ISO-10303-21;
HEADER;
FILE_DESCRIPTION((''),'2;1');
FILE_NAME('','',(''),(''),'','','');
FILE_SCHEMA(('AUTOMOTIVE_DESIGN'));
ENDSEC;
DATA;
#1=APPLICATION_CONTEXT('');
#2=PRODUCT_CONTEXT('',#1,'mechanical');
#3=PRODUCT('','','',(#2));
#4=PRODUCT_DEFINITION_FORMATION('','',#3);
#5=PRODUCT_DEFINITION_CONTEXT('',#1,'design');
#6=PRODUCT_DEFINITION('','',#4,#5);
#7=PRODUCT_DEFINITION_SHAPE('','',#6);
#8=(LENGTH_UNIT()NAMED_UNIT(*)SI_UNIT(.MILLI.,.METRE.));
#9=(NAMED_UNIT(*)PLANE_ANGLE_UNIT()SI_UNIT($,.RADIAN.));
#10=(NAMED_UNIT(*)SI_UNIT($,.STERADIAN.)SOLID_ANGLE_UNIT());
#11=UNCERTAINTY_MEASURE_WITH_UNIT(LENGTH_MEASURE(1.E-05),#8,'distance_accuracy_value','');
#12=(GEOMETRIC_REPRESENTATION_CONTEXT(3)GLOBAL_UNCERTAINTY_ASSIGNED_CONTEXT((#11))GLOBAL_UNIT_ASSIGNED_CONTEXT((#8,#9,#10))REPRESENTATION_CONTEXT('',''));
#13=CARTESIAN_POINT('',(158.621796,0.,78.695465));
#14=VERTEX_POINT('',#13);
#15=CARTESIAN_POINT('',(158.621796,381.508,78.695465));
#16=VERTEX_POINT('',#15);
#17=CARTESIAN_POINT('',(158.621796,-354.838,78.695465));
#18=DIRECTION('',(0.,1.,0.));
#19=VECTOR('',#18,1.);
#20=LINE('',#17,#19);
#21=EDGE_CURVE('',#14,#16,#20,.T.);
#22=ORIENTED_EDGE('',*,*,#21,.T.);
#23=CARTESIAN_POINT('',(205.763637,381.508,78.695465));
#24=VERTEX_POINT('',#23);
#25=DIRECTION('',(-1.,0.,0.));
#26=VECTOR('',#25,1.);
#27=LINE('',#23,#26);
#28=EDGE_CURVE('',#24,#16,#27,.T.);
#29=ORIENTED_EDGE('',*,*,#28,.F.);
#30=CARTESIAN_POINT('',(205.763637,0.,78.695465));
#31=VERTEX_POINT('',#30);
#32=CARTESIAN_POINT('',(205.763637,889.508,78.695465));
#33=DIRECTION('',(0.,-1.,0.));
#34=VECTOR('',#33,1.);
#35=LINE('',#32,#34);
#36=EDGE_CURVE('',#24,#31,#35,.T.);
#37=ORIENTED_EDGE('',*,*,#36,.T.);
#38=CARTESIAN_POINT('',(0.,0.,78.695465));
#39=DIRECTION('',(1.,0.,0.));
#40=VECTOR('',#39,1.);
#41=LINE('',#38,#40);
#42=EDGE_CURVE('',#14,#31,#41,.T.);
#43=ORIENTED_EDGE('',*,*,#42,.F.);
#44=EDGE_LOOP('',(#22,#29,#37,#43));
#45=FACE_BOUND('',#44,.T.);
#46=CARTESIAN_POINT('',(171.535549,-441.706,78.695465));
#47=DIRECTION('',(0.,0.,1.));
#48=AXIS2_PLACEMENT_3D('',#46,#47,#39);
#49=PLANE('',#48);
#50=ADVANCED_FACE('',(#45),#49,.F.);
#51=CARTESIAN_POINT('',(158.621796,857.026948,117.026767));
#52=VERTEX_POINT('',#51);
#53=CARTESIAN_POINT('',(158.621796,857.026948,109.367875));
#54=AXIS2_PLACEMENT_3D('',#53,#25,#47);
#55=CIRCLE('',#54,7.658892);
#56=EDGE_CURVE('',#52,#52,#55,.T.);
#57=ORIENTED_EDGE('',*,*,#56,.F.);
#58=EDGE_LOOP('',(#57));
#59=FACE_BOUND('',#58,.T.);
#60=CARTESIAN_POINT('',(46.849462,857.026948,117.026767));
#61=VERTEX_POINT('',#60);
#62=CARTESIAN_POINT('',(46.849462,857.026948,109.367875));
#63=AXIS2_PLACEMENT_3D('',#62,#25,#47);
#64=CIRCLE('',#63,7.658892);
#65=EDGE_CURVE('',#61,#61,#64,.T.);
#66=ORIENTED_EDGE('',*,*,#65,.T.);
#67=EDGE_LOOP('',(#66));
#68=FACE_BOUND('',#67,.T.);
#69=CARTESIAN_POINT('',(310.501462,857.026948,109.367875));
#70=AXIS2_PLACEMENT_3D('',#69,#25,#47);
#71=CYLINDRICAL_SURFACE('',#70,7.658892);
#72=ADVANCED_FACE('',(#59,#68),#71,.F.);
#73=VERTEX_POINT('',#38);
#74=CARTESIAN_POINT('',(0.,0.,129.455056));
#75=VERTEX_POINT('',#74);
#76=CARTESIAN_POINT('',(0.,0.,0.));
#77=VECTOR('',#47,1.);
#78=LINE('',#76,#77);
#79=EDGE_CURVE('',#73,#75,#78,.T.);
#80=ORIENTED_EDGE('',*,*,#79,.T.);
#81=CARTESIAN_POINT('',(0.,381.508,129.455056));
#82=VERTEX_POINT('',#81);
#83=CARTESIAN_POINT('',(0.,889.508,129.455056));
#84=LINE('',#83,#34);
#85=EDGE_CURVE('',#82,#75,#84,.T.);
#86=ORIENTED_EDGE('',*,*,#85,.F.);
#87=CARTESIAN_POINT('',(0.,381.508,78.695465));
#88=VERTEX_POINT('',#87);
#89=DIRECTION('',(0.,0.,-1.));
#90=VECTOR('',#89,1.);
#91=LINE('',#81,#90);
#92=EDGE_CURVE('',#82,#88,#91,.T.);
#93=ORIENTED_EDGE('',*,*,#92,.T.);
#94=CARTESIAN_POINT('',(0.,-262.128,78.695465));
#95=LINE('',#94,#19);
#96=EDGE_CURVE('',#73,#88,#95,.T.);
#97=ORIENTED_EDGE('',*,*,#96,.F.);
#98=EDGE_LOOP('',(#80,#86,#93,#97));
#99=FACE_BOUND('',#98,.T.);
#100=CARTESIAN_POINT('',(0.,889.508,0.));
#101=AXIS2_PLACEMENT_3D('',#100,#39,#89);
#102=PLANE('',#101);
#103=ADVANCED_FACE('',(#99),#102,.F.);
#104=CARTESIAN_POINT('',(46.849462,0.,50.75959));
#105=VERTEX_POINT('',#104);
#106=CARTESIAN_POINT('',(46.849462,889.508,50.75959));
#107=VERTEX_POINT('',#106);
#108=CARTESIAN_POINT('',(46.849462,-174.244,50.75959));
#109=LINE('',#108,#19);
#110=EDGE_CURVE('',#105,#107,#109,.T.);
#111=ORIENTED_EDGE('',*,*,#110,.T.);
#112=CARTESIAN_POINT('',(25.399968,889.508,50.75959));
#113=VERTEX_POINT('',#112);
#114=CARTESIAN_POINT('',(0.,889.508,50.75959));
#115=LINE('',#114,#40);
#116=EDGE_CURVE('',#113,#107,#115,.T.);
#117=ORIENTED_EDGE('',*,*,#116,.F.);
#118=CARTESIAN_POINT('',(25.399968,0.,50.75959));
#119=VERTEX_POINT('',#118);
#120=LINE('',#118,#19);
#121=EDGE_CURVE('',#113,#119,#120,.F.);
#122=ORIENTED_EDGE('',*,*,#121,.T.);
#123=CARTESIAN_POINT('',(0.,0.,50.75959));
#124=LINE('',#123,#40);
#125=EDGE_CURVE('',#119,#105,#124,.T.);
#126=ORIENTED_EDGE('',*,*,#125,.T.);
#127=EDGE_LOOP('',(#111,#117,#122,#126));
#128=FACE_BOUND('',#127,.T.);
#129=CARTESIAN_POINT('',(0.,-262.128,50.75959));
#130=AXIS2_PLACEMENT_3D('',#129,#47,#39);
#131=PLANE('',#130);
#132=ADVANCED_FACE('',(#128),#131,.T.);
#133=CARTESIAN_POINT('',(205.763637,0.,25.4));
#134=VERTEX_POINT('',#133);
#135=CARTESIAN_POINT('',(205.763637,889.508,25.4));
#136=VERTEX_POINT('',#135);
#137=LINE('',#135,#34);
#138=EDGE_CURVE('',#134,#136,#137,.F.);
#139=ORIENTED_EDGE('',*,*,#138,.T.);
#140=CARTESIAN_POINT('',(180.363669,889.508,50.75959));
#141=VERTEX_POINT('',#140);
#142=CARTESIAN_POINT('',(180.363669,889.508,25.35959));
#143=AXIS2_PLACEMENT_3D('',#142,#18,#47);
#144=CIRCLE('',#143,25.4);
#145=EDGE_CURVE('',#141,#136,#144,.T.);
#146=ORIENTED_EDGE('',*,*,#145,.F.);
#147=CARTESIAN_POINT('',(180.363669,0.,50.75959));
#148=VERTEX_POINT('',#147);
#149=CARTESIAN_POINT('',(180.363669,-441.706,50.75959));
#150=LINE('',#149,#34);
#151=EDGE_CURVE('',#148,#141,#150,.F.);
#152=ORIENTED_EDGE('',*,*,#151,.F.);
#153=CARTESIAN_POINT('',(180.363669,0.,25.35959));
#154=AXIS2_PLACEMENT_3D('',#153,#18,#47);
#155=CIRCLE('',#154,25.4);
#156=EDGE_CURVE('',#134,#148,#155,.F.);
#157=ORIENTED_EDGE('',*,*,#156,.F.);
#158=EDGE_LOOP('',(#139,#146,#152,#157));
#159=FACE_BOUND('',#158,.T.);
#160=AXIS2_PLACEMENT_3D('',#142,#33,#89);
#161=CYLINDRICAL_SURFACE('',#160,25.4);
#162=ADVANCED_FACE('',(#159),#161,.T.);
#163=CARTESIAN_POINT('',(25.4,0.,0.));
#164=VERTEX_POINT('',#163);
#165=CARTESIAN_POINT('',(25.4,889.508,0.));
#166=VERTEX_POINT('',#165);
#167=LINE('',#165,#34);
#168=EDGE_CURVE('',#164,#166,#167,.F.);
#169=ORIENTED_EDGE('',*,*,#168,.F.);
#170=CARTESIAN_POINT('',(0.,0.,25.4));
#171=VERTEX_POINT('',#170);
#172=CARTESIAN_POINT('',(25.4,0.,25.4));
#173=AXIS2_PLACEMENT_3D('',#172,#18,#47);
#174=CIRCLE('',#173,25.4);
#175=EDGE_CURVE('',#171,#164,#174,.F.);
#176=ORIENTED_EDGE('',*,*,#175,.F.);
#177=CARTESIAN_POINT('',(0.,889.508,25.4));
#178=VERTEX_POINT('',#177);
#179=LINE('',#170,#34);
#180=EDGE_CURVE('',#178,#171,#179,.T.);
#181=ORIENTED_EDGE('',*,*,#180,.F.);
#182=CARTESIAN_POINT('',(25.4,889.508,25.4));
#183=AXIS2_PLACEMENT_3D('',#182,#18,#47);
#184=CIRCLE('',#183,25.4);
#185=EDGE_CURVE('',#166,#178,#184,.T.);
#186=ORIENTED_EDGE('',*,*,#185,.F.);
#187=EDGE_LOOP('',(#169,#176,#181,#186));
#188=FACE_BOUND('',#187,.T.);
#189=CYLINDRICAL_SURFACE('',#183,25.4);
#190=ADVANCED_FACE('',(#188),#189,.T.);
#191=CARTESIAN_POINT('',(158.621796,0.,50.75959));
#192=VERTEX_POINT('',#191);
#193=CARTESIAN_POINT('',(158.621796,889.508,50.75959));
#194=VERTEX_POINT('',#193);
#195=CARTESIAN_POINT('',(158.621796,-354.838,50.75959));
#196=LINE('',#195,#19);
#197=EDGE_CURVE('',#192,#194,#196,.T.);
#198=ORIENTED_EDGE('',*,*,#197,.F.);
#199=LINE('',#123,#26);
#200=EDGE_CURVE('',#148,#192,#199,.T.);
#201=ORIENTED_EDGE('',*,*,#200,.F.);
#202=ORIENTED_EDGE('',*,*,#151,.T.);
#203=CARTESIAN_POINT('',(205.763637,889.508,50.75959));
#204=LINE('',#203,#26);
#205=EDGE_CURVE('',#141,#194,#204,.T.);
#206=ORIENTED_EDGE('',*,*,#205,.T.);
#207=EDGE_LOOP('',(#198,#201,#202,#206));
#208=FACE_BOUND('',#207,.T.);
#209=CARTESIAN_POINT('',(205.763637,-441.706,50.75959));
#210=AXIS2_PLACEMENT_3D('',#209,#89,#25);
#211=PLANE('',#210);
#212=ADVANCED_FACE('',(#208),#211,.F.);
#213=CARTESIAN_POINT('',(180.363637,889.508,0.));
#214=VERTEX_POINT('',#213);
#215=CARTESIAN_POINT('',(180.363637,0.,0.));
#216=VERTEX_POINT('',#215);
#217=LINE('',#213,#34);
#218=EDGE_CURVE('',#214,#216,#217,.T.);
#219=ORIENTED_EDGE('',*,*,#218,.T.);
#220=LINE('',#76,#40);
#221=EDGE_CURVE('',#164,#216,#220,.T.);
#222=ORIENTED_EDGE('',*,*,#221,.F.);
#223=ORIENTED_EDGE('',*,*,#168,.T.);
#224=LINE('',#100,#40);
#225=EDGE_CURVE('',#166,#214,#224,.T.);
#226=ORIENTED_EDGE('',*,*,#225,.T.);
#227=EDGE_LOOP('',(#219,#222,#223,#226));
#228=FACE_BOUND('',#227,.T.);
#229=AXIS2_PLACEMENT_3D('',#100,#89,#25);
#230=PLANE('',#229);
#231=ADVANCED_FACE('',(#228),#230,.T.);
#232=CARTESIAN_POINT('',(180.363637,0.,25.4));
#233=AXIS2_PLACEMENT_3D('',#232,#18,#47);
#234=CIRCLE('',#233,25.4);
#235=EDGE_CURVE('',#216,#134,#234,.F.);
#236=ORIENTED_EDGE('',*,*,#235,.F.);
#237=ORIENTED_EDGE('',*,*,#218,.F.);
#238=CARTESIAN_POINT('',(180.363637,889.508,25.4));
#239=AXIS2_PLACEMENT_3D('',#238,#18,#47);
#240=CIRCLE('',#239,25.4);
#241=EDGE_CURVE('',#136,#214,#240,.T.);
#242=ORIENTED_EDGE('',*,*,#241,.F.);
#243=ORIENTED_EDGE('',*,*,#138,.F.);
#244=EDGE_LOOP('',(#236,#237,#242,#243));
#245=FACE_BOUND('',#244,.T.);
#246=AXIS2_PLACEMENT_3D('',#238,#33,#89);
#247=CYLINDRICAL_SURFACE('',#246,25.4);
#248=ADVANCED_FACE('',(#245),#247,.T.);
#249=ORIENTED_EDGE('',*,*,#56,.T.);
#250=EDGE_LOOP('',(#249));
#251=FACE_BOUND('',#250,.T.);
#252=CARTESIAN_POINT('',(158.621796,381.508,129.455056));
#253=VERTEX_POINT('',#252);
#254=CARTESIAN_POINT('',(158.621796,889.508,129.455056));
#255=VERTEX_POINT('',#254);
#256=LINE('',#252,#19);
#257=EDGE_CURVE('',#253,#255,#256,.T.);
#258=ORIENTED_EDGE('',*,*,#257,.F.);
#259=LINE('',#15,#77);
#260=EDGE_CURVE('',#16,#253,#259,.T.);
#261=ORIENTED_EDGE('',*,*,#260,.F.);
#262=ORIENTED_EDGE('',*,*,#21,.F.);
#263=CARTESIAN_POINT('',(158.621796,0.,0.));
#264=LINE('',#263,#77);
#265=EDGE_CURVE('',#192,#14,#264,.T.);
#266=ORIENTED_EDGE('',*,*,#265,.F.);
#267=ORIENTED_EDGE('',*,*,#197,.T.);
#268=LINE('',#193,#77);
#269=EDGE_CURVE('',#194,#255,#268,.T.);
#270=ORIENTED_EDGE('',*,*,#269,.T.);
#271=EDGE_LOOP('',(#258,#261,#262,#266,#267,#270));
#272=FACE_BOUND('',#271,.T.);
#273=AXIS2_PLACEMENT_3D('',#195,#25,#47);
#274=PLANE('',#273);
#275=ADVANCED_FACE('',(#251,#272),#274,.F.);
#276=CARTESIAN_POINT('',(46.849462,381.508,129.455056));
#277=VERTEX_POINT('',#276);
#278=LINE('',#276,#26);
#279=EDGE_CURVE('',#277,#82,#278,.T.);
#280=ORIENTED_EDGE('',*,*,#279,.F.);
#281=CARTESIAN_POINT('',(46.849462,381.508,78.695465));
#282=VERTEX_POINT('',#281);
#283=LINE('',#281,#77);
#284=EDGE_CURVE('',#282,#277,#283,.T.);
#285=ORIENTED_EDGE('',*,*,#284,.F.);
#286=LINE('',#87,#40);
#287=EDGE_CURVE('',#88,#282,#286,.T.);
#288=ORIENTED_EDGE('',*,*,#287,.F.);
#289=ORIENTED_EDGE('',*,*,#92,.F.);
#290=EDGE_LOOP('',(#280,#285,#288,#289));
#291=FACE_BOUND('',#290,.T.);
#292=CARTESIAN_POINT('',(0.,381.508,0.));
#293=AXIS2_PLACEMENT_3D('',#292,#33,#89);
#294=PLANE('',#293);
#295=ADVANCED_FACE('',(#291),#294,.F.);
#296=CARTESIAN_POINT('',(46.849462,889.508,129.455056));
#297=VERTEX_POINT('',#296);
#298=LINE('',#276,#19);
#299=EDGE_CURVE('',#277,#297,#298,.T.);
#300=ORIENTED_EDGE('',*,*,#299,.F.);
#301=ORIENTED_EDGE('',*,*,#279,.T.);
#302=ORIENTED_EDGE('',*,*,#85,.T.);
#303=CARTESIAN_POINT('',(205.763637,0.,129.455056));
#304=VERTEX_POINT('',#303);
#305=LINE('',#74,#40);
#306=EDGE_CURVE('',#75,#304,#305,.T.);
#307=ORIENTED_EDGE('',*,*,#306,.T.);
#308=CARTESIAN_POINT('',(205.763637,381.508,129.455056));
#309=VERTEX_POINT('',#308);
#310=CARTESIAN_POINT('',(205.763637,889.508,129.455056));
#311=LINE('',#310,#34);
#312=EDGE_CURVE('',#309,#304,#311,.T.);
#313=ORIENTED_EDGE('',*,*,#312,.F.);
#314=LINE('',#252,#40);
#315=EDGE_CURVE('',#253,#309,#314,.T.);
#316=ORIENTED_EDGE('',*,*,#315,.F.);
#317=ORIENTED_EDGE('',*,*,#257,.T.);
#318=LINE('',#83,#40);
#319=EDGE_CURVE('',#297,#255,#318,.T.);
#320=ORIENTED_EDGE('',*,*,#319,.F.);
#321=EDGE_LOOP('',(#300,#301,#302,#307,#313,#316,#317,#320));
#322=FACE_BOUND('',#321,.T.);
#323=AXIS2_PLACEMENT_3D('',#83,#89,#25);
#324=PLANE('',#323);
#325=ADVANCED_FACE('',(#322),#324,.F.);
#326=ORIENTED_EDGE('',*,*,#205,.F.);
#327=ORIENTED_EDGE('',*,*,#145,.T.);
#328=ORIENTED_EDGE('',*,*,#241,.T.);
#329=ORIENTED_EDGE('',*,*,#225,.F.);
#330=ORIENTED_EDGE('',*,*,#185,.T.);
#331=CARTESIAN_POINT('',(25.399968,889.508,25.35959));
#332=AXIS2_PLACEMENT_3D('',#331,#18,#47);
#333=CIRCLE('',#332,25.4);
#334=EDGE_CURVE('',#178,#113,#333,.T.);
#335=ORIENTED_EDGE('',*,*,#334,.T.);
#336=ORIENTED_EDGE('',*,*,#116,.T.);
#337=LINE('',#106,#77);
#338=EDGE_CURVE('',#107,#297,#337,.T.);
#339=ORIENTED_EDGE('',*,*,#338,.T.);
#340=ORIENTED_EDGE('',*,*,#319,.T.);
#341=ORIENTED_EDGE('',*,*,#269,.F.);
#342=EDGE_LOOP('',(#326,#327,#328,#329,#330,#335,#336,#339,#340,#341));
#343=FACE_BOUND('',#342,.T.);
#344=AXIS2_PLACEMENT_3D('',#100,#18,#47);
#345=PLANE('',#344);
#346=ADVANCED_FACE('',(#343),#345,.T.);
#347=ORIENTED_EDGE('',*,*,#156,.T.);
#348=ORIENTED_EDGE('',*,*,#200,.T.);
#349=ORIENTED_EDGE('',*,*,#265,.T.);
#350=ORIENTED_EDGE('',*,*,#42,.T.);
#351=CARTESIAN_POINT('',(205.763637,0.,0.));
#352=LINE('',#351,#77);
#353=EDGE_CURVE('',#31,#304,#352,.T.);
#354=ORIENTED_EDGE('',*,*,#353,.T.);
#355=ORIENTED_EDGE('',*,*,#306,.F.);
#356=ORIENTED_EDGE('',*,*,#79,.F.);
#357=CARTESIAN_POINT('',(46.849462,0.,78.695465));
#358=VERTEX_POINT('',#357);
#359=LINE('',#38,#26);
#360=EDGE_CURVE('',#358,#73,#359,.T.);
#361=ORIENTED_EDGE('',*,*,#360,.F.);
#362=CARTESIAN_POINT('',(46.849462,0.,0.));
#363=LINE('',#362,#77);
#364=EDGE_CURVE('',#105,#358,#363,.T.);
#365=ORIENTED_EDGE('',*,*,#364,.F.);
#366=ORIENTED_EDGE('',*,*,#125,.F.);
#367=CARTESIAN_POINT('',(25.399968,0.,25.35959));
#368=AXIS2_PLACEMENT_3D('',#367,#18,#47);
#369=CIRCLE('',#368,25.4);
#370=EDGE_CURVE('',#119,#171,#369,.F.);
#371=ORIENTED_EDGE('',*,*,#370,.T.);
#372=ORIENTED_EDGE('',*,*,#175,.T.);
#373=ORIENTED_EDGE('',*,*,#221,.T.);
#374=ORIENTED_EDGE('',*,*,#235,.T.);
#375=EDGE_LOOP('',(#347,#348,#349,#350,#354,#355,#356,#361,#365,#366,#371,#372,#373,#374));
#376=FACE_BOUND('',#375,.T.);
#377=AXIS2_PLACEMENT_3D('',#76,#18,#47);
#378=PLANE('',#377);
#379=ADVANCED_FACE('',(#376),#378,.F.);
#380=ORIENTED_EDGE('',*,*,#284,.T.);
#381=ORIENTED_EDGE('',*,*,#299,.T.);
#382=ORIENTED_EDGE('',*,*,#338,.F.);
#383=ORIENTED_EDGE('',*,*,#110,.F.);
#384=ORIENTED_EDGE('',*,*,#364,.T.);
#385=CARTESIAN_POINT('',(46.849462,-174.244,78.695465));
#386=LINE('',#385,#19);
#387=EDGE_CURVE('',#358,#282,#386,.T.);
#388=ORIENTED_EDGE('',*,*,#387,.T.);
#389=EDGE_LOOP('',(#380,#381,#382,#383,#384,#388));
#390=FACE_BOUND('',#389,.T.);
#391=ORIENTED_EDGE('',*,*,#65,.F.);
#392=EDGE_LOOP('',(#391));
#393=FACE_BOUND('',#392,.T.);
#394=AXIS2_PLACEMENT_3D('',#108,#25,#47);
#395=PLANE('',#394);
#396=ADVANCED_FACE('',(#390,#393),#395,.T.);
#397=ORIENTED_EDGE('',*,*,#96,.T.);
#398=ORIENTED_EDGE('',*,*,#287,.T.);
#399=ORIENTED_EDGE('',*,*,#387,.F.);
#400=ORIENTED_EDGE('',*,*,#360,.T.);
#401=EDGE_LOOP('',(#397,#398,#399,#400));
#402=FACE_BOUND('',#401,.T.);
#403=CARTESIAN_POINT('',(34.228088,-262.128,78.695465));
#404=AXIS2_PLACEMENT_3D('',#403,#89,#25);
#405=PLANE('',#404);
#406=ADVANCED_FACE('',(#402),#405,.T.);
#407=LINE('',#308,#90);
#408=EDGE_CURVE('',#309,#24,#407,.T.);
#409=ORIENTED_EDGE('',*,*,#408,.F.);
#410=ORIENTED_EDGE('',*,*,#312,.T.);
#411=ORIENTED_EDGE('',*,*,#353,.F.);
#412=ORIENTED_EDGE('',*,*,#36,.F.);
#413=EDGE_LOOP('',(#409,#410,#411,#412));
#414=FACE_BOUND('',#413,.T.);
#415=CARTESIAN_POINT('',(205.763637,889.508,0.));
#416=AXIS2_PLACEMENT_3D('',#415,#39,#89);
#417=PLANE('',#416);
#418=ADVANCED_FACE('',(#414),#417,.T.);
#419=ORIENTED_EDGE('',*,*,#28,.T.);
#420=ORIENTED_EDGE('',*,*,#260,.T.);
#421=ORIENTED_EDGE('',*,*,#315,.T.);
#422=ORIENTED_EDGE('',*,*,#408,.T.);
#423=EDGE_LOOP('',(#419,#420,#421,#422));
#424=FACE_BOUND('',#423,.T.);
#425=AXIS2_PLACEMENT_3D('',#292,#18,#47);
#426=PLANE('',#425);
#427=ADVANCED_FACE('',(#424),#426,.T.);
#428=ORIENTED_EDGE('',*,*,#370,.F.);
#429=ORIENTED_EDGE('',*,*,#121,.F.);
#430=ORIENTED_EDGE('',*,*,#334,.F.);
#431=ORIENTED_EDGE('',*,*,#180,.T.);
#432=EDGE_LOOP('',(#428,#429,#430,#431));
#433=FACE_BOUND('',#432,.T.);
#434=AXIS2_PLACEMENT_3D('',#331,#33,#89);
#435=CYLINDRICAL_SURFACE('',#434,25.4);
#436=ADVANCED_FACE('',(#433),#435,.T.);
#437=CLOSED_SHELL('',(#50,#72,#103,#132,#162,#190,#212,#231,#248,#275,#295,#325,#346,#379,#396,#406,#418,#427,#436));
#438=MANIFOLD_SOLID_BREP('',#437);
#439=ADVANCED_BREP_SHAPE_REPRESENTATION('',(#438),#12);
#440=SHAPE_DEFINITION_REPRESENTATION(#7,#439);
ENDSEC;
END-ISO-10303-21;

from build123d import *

# Parameters (mm, degrees)
SKETCH1_W           = 205.763637231
SKETCH1_H           = 129.455055738
BOSS_EXTRUDE1_DEPTH = 889.508
SKETCH2_W           = 34.228088198
SKETCH2_H           = 27.935874949
CUT_EXTRUDE1_DEPTH  = 1151.636
SKETCH3_W           = 34.228088198
SKETCH3_H           = 27.935874949
CUT_EXTRUDE2_DEPTH  = 1331.214
FILLET3_R           = 25.4
FILLET4_R           = 25.4
FILLET5_R           = 25.4
FILLET7_R           = 25.4
SKETCH4_W           = 12.650207524
SKETCH4_H           = 27.935874949
BOSS_EXTRUDE3_DEPTH = 874.268
SKETCH5_W           = 12.621373824
SKETCH5_H           = 27.935874949
CUT_EXTRUDE5_DEPTH  = 1063.752
SKETCH6_W           = 12.913753515
SKETCH6_H           = 27.935874949
CUT_EXTRUDE6_DEPTH  = 1244.346
SKETCH8_W           = 46.849462022
SKETCH8_H           = 50.759590395
CUT_EXTRUDE7_DEPTH  = 508
SKETCH9_W           = 47.141841713
SKETCH9_H           = 50.759590395
CUT_EXTRUDE8_DEPTH  = 508
SKETCH10_R          = 7.658892277
CUT_EXTRUDE9_DEPTH  = 263.652


with BuildPart() as part:
    # Sketch1 → Boss-Extrude1 (new body)
    with BuildSketch(Plane(origin=(0, 0, 0), x_dir=(1, 0, 0), z_dir=(0, 1, 0))):
        with Locations((102.881818616, -64.727527869)):
            Rectangle(SKETCH1_W, SKETCH1_H)
    extrude(amount=BOSS_EXTRUDE1_DEPTH)

    # Sketch2 → Cut-Extrude1 (cut)
    with BuildSketch(Plane(origin=(0, 889.508, 0), x_dir=(1, 0, 0), z_dir=(0, 1, 0))):
        with Locations((17.114044099, -64.727527869)):
            Rectangle(SKETCH2_W, SKETCH2_H)
    extrude(amount=-CUT_EXTRUDE1_DEPTH, mode=Mode.SUBTRACT)

    # Sketch3 → Cut-Extrude2 (cut)
    with BuildSketch(Plane(origin=(0, 889.508, 0), x_dir=(1, 0, 0), z_dir=(0, 1, 0))):
        with Locations((188.649593132, -64.727527869)):
            Rectangle(SKETCH3_W, SKETCH3_H)
    extrude(amount=-CUT_EXTRUDE2_DEPTH, mode=Mode.SUBTRACT)

    # Fillet3
    fillet3_edges = [part.edges().sort_by_distance(p)[0] for p in [
        (0, 444.754, 0),
    ]]
    fillet(fillet3_edges, radius=FILLET3_R)

    # Fillet4
    fillet4_edges = [part.edges().sort_by_distance(p)[0] for p in [
        (205.763637231, 444.754, 0),
    ]]
    fillet(fillet4_edges, radius=FILLET4_R)

    # Fillet5
    # the kernel refuses this fillet: 25.4 mm, written as the material it takes off along each edge
    with BuildSketch(Plane(origin=(205.763637231, 953.008, 50.759590394), x_dir=(0, 0, -1), z_dir=(0, -1, 0))) as fillet5_piece_1:
        with BuildLine():
            CenterArc((FILLET5_R, -FILLET5_R), FILLET5_R, 90, 90)
            Line((0, -FILLET5_R), (0, 0))
            Line((0, 0), (FILLET5_R, 0))
        make_face()
    extrude(amount=1016.508, mode=Mode.SUBTRACT)

    # Fillet7
    # the kernel refuses this fillet: 25.4 mm, written as the material it takes off along each edge
    with BuildSketch(Plane(origin=(0, 953.008, 50.759590394), x_dir=(0, 0, -1), z_dir=(0, -1, 0))) as fillet7_piece_1:
        with BuildLine():
            CenterArc((FILLET7_R, FILLET7_R), FILLET7_R, 180, 90)
            Line((0, FILLET7_R), (0, 0))
            Line((0, 0), (FILLET7_R, 0))
        make_face()
    extrude(amount=1016.508, mode=Mode.SUBTRACT)

    # Sketch4 → Boss-Extrude3 (add)
    with BuildSketch(Plane(origin=(0, 889.508, 0), x_dir=(1, 0, 0), z_dir=(0, 1, 0))):
        with Locations((40.55319196, -64.727527869)):
            Rectangle(SKETCH4_W, SKETCH4_H)
    extrude(amount=-BOSS_EXTRUDE3_DEPTH)

    # Sketch5 → Cut-Extrude5 (cut)
    with BuildSketch(Plane(origin=(0, 889.508, 0), x_dir=(1, 0, 0), z_dir=(0, 1, 0))):
        with Locations((40.53877511, -64.727527869)):
            Rectangle(SKETCH5_W, SKETCH5_H)
    extrude(amount=-CUT_EXTRUDE5_DEPTH, mode=Mode.SUBTRACT)

    # Sketch6 → Cut-Extrude6 (cut)
    with BuildSketch(Plane(origin=(0, 889.508, 0), x_dir=(1, 0, 0), z_dir=(0, 1, 0))):
        with Locations((165.078672276, -64.727527869)):
            Rectangle(SKETCH6_W, SKETCH6_H)
    extrude(amount=-CUT_EXTRUDE6_DEPTH, mode=Mode.SUBTRACT)

    # Sketch8 → Cut-Extrude7 (cut)
    with BuildSketch(Plane(origin=(0, 889.508, 0), x_dir=(1, 0, 0), z_dir=(0, 1, 0))):
        with Locations((23.424731011, -104.075260541)):
            Rectangle(SKETCH8_W, SKETCH8_H)
    extrude(amount=-CUT_EXTRUDE7_DEPTH, mode=Mode.SUBTRACT)

    # Sketch9 → Cut-Extrude8 (cut)
    with BuildSketch(Plane(origin=(0, 889.508, 0), x_dir=(1, 0, 0), z_dir=(0, 1, 0))):
        with Locations((182.192716375, -104.075260541)):
            Rectangle(SKETCH9_W, SKETCH9_H)
    extrude(amount=-CUT_EXTRUDE8_DEPTH, mode=Mode.SUBTRACT)

    # Sketch10 → Cut-Extrude9 (cut)
    with BuildSketch(Plane.ZY.offset(-46.849462022)):
        with Locations((109.367874663, 857.026947913)):
            Circle(SKETCH10_R)
    extrude(amount=-CUT_EXTRUDE9_DEPTH, mode=Mode.SUBTRACT)


solid = part.part
